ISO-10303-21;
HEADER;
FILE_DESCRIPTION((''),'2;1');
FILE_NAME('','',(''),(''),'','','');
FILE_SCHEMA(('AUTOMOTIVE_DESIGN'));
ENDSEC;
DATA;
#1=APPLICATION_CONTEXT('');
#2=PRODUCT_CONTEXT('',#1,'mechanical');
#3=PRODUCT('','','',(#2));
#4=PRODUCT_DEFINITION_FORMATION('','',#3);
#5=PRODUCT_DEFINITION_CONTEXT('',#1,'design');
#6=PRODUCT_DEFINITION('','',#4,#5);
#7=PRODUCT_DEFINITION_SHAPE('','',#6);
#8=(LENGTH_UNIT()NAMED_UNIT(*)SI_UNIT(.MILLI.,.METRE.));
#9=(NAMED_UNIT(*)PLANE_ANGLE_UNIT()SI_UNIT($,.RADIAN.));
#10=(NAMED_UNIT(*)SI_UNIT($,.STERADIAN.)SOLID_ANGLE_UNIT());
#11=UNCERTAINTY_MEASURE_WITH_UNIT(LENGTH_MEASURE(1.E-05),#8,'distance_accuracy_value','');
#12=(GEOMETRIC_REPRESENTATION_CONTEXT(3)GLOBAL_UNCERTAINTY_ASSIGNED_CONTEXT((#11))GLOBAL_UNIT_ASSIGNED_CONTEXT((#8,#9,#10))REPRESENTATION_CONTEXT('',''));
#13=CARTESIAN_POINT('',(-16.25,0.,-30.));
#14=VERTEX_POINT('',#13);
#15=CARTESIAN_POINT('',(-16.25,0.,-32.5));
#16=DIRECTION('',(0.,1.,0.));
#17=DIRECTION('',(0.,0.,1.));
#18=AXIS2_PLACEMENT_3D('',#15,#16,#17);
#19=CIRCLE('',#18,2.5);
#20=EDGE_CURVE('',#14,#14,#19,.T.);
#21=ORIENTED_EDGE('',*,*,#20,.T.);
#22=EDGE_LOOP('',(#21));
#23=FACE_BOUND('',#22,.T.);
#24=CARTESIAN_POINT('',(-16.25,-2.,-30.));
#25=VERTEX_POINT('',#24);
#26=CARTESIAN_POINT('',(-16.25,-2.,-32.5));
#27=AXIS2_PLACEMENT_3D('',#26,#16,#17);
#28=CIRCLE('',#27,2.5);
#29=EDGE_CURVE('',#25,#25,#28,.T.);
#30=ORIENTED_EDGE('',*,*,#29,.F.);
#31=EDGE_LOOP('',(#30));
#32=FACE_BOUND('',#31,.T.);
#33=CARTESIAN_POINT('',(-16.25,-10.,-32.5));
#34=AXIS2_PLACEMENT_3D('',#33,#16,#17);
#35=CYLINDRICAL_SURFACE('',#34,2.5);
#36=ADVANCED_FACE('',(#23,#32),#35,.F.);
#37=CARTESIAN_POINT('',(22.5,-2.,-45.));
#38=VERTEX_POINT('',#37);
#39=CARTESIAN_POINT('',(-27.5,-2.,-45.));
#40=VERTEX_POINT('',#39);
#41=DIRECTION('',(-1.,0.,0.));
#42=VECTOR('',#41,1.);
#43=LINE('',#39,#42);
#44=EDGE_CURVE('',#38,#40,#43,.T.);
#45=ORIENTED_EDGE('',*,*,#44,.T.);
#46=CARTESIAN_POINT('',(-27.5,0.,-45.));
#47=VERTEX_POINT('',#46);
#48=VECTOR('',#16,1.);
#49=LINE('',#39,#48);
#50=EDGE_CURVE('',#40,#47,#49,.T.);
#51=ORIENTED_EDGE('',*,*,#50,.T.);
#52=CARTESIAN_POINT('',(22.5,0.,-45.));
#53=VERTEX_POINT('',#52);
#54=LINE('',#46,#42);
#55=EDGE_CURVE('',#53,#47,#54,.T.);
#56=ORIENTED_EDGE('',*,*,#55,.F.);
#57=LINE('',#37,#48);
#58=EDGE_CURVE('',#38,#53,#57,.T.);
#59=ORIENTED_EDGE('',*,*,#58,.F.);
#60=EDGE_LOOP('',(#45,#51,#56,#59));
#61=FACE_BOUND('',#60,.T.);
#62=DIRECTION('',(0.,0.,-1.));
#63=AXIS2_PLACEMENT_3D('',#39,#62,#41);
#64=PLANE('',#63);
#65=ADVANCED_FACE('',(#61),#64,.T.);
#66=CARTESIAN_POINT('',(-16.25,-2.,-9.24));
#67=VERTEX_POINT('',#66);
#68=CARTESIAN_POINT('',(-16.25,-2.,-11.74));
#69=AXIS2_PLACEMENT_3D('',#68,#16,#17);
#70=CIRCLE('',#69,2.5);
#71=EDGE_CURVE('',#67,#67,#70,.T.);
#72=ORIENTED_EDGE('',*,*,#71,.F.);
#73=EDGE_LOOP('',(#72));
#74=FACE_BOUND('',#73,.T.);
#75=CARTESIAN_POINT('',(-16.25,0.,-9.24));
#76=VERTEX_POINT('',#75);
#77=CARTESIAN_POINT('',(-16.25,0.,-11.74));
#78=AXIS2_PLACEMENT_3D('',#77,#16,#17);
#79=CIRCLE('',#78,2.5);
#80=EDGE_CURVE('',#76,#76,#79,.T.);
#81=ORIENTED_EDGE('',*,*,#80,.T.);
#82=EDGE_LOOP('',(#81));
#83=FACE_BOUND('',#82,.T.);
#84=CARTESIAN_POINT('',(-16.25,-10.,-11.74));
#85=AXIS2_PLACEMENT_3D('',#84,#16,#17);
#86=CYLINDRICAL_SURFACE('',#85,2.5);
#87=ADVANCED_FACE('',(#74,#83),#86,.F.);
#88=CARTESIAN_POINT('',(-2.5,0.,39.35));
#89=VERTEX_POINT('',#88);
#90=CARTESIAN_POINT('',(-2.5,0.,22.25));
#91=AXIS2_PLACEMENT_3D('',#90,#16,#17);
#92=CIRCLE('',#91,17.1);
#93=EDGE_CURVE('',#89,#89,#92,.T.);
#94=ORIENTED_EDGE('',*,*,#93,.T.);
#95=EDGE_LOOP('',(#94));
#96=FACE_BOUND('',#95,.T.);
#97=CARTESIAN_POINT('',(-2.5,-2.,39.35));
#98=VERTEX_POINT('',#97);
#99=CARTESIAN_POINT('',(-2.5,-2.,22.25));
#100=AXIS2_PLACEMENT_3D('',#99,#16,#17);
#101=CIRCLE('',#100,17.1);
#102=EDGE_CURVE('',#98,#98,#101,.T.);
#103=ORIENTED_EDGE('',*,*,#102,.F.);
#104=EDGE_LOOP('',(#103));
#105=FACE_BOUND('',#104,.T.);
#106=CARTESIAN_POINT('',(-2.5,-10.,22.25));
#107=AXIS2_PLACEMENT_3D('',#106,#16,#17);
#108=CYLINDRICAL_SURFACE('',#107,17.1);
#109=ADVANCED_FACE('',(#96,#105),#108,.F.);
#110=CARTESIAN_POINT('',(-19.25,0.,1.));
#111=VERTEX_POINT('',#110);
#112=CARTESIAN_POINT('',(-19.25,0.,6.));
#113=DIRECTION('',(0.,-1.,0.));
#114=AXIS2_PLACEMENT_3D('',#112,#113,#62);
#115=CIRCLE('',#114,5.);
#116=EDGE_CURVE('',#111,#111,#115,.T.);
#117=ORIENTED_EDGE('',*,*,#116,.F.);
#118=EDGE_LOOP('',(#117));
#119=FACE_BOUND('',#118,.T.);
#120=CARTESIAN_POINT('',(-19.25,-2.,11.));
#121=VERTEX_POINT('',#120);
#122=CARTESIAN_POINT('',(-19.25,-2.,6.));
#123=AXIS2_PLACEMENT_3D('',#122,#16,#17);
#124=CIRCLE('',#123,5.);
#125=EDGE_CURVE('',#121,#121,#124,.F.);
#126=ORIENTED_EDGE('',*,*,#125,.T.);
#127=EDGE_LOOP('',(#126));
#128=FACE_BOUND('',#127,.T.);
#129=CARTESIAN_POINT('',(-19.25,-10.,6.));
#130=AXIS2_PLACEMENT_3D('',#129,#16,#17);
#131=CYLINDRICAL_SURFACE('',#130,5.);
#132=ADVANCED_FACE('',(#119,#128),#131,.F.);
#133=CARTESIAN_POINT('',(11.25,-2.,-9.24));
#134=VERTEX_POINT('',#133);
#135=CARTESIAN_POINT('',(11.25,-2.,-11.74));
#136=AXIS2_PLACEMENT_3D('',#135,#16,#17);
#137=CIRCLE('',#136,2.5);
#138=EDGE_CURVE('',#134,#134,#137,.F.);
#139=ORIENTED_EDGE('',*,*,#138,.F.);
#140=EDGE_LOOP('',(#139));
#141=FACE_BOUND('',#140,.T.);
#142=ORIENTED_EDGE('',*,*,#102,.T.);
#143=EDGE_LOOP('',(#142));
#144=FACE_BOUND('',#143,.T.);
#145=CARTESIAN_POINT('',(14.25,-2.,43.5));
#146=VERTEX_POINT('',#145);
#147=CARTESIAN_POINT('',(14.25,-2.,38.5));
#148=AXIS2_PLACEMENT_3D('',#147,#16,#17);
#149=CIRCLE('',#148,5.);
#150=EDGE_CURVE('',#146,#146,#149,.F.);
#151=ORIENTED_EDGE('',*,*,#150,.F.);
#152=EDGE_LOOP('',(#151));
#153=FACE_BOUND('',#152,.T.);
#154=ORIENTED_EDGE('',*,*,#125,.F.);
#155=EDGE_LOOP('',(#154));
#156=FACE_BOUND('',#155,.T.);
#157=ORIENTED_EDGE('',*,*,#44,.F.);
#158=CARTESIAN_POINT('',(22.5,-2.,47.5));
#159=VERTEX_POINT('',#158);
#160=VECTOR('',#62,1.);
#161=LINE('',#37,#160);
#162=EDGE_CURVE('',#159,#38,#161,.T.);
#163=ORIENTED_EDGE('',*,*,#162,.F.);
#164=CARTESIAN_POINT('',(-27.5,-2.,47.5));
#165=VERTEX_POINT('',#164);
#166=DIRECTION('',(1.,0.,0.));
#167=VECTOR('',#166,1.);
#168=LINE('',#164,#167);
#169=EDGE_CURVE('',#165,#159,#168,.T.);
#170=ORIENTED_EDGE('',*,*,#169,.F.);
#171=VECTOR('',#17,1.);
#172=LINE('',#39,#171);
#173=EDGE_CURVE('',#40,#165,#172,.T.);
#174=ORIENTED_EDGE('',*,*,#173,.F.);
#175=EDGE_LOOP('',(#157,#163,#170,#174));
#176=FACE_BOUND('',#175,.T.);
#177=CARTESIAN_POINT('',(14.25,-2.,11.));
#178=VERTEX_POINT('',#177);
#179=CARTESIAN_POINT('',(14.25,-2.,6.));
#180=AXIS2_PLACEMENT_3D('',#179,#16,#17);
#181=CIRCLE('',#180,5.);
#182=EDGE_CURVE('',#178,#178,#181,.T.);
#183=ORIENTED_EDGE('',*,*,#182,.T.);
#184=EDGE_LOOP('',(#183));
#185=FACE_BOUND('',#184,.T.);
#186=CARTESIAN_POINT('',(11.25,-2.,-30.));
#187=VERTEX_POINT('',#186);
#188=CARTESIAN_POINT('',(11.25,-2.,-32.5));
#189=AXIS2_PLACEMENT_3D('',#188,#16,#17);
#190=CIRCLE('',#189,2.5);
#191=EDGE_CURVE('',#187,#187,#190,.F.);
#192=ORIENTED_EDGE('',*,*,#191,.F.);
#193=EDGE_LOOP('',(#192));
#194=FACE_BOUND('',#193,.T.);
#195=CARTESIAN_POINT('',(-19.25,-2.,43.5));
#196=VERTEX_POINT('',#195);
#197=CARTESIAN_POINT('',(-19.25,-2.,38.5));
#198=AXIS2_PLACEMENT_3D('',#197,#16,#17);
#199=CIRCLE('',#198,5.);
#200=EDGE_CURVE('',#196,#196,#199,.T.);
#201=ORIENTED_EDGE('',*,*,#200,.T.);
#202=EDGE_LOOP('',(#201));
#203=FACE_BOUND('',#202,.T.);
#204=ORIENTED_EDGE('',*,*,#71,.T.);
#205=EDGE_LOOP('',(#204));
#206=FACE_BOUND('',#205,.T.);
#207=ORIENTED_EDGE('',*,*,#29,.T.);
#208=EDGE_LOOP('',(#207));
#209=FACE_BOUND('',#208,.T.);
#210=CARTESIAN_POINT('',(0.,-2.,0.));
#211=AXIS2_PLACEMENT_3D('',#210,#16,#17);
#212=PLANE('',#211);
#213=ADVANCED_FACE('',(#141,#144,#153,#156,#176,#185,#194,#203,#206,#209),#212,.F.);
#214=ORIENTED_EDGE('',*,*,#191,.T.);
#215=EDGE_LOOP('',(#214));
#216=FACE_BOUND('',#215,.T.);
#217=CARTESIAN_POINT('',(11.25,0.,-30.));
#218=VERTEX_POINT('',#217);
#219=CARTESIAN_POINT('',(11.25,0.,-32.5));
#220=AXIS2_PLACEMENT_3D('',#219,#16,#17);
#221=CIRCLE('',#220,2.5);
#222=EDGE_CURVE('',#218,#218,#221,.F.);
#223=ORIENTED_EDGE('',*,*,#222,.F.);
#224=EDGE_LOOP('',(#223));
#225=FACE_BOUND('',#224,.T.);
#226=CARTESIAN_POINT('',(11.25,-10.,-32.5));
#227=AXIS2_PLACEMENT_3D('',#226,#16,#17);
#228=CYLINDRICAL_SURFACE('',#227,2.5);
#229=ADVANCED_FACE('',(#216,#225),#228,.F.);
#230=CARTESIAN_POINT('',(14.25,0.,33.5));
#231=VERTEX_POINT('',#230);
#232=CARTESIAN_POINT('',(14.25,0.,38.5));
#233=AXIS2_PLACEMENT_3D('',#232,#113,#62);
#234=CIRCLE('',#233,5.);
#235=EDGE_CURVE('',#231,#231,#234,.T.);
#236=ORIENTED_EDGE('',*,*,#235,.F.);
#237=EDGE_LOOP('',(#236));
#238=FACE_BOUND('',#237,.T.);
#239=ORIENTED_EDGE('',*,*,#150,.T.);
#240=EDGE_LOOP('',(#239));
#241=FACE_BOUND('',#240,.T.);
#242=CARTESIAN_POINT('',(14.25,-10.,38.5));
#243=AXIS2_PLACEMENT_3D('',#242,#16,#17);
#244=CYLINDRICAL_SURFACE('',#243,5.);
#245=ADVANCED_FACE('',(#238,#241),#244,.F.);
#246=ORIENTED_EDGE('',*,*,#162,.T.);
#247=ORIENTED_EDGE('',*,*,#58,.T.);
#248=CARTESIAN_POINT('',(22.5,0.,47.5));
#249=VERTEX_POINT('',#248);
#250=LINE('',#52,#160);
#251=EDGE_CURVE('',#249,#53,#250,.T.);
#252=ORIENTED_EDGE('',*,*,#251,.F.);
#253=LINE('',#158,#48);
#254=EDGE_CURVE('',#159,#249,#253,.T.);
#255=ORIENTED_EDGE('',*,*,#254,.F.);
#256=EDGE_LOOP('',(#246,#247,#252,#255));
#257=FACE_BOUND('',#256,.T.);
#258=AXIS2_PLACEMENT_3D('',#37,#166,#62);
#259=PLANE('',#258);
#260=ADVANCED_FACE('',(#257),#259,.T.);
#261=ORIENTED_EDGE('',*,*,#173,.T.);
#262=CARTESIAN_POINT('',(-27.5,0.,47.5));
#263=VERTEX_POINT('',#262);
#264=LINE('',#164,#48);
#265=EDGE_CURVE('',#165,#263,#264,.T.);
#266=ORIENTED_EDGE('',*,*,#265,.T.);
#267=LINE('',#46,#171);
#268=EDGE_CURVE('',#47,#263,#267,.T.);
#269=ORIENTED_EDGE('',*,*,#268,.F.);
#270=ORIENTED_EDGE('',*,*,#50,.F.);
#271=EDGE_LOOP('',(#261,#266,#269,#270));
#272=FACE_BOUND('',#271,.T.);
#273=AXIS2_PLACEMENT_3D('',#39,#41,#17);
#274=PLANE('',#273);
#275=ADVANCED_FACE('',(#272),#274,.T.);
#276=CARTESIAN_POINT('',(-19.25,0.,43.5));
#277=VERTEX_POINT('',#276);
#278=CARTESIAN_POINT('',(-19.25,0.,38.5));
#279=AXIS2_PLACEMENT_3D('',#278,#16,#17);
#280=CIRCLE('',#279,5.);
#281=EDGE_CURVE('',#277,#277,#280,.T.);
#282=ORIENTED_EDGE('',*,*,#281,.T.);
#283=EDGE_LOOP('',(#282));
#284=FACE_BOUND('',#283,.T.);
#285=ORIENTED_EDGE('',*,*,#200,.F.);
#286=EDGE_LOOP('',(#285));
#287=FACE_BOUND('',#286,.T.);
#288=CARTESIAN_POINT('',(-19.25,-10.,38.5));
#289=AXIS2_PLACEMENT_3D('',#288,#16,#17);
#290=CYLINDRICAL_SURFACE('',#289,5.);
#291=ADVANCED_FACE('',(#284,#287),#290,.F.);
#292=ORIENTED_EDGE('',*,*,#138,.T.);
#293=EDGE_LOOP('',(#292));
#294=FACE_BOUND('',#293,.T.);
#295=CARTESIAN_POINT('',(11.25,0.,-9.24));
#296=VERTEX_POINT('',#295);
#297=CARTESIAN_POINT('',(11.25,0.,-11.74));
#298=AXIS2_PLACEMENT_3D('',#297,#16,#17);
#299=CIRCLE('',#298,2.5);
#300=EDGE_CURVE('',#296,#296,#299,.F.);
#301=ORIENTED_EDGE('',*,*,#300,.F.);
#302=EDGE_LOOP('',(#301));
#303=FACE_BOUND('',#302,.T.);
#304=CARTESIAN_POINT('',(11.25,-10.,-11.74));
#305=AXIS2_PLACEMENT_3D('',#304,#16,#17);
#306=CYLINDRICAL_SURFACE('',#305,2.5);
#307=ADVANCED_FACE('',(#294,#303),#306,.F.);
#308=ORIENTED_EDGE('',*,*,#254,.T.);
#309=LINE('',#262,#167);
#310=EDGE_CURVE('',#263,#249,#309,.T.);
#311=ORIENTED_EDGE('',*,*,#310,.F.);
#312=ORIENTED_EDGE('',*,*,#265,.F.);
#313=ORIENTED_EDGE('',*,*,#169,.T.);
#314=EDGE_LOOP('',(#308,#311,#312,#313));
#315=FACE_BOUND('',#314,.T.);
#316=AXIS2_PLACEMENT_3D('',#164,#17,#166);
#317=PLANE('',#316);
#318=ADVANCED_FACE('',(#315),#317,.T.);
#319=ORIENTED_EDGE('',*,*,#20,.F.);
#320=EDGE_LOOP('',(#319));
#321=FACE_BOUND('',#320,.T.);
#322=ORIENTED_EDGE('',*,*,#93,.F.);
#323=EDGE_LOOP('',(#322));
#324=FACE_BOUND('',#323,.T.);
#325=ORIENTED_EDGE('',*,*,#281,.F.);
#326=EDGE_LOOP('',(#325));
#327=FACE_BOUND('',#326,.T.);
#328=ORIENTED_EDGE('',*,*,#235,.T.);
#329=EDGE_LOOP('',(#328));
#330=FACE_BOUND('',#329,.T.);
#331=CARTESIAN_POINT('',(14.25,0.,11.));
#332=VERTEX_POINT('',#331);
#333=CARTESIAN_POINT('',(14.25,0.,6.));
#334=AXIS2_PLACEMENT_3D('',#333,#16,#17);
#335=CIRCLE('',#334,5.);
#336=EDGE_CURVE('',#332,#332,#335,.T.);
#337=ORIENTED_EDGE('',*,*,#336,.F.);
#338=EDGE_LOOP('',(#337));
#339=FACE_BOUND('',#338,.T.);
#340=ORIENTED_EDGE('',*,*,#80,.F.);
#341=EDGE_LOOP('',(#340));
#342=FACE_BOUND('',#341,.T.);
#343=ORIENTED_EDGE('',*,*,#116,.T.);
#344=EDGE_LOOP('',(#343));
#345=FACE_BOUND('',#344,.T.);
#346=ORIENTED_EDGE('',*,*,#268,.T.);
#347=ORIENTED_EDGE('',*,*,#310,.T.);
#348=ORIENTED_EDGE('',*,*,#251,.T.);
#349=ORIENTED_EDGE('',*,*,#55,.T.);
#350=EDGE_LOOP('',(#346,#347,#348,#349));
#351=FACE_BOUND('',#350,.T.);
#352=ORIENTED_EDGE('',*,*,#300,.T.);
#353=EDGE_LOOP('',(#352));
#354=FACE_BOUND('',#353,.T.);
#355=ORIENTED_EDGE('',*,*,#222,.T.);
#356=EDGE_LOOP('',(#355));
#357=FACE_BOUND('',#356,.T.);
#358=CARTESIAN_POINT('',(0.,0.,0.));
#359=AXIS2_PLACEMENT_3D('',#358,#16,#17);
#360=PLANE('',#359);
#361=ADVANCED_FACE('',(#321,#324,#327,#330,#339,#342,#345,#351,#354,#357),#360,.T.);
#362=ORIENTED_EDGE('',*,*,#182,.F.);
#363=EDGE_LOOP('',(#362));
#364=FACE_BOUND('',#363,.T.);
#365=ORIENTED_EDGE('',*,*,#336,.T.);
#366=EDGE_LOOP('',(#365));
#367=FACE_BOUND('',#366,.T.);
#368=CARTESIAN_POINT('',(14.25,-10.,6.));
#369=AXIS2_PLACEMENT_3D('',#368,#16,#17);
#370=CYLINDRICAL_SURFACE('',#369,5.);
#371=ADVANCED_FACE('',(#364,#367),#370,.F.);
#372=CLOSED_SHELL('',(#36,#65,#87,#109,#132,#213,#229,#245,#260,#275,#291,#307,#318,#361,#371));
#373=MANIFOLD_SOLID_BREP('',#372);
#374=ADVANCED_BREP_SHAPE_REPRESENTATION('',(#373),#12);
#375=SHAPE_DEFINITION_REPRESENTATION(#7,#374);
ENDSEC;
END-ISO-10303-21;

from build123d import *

# Parameters (mm, degrees)
SKETCH2_W          = 50
SKETCH2_H          = 92.5
BASE_FLANGE1_DEPTH = 2
SKETCH1_R          = 2.5
SKETCH1_R_2        = 5
SKETCH1_R_3        = 17.1
CUT_EXTRUDE1_DEPTH = 10


# Sheet-metal steps are written as plain solids
with BuildPart() as part:
    # Sketch2 → Base-Flange1 (new body)
    with BuildSketch(Plane(origin=(0, 0, 0), x_dir=(1, 0, 0), z_dir=(0, 1, 0))):
        with Locations((-2.5, -1.25)):
            Rectangle(SKETCH2_W, SKETCH2_H)
    extrude(amount=-BASE_FLANGE1_DEPTH)

    # Sketch1 → Cut-Extrude1 (cut)
    with BuildSketch(Plane(origin=(0, 0, 0), x_dir=(1, 0, 0), z_dir=(0, 1, 0))):
        with Locations(Location((-16.25, 11.74, 0), (0, 0, 270))):
            Circle(SKETCH1_R)
        with Locations(Location((11.25, 11.74, 0), (0, 0, 270))):
            Circle(SKETCH1_R)
        with Locations(Location((11.25, 32.5, 0), (0, 0, 270))):
            Circle(SKETCH1_R)
        with Locations(Location((-19.25, -38.5, 0), (0, 0, 270))):
            Circle(SKETCH1_R_2)
        with Locations(Location((14.25, -38.5, 0), (0, 0, 270))):
            Circle(SKETCH1_R_2)
        with Locations(Location((14.25, -6, 0), (0, 0, 270))):
            Circle(SKETCH1_R_2)
        with Locations(Location((-19.25, -6, 0), (0, 0, 270))):
            Circle(SKETCH1_R_2)
        with Locations(Location((-16.25, 32.5, 0), (0, 0, 270))):
            Circle(SKETCH1_R)
        with Locations(Location((-2.5, -22.25, 0), (0, 0, 270))):
            Circle(SKETCH1_R_3)
    extrude(amount=-CUT_EXTRUDE1_DEPTH, mode=Mode.SUBTRACT)


solid = part.part
